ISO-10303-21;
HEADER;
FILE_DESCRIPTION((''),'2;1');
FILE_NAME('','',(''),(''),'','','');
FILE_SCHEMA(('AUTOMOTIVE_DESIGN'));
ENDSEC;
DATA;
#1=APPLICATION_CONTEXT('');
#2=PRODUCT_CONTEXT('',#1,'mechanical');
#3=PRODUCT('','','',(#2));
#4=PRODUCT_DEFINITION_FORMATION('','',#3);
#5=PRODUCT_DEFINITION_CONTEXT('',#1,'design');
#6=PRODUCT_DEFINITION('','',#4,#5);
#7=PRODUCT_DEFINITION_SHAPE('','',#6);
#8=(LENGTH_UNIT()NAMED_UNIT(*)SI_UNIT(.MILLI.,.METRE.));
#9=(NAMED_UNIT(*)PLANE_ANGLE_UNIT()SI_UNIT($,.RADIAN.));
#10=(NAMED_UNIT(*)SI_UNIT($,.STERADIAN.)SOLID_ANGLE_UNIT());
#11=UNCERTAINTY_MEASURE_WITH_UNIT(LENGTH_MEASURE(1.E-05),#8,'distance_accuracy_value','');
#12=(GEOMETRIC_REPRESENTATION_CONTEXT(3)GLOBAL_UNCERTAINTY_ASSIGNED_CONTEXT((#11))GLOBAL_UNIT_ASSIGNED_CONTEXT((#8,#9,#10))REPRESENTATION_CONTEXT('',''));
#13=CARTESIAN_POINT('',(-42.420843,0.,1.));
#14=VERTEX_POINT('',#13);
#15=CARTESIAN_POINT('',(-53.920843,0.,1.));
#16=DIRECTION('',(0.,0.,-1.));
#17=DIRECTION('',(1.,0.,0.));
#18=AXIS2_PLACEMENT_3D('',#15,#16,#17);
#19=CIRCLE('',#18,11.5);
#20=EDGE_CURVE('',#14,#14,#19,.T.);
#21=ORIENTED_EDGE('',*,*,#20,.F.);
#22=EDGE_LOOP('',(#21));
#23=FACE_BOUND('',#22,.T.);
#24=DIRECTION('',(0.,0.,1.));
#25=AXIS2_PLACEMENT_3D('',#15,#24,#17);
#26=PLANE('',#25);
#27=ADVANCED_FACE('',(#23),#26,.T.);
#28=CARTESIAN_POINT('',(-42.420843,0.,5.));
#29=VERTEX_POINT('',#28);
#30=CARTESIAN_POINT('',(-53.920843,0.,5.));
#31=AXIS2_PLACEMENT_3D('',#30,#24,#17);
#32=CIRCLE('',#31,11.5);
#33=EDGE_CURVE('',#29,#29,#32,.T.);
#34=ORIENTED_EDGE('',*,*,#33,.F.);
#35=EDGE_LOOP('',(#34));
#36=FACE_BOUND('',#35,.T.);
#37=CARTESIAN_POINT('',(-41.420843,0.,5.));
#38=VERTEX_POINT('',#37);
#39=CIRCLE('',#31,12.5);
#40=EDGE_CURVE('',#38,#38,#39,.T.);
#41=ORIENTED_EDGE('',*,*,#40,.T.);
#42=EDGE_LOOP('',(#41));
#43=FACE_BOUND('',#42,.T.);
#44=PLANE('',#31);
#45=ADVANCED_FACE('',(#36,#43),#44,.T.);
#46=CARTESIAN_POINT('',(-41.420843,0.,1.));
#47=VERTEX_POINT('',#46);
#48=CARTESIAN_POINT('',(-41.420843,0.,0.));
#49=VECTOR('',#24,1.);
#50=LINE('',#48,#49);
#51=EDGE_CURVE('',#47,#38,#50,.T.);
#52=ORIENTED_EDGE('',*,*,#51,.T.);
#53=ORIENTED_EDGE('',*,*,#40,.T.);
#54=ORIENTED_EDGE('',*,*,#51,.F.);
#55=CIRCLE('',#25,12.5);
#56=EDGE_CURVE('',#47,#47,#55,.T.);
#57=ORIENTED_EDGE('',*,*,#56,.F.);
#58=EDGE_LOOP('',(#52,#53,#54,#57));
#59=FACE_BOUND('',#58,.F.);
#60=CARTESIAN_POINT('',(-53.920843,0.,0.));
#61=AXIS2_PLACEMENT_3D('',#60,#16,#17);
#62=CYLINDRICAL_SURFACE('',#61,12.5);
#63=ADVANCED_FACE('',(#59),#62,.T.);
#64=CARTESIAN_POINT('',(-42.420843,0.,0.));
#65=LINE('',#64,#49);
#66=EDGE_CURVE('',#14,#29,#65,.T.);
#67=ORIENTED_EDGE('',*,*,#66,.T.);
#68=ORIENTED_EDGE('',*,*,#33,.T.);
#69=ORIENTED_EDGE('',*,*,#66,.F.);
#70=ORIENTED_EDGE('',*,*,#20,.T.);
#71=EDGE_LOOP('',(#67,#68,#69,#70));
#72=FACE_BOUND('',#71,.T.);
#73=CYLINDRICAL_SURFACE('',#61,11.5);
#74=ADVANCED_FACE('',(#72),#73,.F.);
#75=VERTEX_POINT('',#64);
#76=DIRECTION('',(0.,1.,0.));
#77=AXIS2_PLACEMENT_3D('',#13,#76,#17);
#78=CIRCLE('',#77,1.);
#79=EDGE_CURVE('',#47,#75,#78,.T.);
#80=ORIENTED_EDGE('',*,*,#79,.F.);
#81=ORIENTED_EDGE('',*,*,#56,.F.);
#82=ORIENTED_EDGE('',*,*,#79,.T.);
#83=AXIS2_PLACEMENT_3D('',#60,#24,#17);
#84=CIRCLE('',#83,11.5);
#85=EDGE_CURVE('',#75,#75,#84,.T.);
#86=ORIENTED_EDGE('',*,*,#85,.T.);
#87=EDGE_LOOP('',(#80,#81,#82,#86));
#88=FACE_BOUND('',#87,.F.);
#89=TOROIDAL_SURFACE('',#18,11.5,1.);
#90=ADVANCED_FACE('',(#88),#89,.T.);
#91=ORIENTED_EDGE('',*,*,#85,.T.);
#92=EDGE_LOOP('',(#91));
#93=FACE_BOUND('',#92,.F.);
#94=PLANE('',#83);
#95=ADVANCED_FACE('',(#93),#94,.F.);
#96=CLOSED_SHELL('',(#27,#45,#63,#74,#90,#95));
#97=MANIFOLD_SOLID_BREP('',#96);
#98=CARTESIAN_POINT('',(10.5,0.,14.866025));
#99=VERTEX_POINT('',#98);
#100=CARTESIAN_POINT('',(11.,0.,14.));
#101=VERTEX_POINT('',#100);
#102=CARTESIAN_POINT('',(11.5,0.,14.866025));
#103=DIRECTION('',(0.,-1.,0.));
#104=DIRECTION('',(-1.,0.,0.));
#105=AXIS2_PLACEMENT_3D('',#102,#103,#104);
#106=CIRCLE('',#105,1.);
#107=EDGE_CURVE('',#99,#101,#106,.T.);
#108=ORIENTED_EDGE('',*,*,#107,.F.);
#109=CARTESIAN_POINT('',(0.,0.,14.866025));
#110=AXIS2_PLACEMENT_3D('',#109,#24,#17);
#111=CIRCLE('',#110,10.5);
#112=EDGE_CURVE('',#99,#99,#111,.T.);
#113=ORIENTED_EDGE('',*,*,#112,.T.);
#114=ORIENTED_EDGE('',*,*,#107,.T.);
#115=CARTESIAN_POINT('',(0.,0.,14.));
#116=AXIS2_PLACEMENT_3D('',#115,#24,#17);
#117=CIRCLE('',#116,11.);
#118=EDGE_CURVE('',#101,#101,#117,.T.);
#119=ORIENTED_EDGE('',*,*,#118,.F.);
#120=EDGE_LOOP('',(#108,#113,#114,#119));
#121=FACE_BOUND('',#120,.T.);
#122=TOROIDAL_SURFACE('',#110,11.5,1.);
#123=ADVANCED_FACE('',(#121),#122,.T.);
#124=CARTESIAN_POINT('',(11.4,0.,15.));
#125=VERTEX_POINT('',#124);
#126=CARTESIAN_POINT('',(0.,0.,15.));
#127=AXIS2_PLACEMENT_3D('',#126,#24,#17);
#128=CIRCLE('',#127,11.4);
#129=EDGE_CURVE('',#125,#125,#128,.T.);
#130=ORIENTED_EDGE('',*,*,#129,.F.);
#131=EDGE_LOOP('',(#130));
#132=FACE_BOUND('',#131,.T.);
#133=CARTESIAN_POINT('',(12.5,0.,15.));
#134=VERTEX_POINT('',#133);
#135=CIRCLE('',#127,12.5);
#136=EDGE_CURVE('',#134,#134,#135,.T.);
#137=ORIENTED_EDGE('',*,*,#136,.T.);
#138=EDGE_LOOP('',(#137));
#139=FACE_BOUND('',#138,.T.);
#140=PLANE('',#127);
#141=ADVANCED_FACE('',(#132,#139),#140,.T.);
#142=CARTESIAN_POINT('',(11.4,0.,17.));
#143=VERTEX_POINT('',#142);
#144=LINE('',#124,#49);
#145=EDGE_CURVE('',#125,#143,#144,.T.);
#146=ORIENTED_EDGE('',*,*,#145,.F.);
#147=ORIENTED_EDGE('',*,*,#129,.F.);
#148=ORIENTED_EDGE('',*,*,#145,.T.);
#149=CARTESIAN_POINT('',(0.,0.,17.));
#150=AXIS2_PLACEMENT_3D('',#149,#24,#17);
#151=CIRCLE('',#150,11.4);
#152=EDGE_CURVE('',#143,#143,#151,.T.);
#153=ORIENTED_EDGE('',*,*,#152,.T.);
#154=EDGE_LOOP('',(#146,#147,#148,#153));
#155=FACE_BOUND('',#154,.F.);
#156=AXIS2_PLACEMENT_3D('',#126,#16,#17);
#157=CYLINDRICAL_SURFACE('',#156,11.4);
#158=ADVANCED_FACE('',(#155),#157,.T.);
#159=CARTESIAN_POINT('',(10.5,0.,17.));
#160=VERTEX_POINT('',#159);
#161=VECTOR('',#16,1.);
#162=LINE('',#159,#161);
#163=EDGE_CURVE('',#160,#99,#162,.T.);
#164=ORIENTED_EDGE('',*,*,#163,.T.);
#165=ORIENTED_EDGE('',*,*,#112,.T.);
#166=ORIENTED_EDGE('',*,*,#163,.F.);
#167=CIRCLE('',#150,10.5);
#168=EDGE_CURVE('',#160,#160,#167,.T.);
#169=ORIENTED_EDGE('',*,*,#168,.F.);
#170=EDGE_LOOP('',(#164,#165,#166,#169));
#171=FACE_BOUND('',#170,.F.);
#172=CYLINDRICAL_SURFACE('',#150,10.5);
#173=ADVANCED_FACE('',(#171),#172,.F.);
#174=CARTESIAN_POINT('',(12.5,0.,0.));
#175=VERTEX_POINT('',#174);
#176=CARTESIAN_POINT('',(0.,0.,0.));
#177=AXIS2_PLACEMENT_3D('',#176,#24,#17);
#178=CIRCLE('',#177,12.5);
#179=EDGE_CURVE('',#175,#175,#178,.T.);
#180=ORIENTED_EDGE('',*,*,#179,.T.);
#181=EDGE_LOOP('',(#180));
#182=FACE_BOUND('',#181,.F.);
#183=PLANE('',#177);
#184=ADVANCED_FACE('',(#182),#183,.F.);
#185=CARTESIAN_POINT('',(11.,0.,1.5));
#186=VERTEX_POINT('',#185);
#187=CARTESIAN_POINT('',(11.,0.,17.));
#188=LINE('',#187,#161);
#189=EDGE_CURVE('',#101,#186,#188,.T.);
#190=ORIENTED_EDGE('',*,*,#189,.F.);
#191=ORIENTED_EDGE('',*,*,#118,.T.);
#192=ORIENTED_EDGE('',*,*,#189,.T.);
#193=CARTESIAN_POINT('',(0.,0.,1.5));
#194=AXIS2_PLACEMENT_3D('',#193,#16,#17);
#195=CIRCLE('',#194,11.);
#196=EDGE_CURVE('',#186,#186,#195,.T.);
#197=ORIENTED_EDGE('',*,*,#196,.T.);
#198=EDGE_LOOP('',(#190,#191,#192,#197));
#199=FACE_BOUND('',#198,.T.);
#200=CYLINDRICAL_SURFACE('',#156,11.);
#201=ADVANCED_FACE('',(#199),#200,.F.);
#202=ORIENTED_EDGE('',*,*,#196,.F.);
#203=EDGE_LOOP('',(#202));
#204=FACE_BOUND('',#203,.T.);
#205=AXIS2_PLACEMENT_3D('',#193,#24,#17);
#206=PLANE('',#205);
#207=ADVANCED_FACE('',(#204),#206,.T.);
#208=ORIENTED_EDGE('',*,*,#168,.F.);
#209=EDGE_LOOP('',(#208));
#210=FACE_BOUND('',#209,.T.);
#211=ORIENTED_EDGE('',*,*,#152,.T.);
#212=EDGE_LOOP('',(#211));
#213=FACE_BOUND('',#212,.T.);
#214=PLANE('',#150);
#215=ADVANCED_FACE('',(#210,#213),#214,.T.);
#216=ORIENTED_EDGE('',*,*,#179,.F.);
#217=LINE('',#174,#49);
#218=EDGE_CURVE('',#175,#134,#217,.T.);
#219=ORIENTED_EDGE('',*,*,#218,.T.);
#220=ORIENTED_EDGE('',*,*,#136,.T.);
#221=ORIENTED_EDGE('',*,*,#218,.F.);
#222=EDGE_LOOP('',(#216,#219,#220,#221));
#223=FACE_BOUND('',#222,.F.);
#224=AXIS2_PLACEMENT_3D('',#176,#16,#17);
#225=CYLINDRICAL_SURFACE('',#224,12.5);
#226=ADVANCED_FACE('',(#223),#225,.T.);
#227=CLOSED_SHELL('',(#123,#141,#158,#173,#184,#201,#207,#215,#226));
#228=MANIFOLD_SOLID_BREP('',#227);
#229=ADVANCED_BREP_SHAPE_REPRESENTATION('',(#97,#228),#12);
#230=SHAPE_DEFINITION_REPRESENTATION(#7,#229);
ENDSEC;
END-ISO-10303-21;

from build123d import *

# Parameters (mm, degrees)
F0_R      = 12.5
F1_DEPTH  = 15
F2_T      = -1.5
F3_R      = 11.4
F3_R_2    = 11
F4_DEPTH  = 2
F5_R      = 12.5
F6_DEPTH  = 5
F7_T      = -1
F8_R      = 1
F10_R     = 11
F10_R_2   = 10.5
F11_DEPTH = 3


# Not quite as in the source:
# - a fillet or chamfer that OpenCascade refuses, or shapes differently, is made with other operations: its cross-section is extruded or revolved along the edge and cut away or added


with BuildPart() as f1:
    # F0 (on Top) → F1 (new body)
    with BuildSketch(Plane.XY):
        Circle(F0_R)
    extrude(amount=F1_DEPTH)

    # F2
    f2_openings = [f1.faces().sort_by_distance(p)[0] for p in [
        (0, 0, 15),
    ]]
    offset(amount=F2_T, openings=f2_openings)

    # F3 (on face) → F4 (join)
    with BuildSketch(Plane.XY.offset(15)):
        Circle(F3_R)
        Circle(F3_R_2, mode=Mode.SUBTRACT)
    extrude(amount=F4_DEPTH)

    # F10 (on face) → F11 (join)
    with BuildSketch(Plane.XY.offset(17)):
        Circle(F10_R)
        Circle(F10_R_2, mode=Mode.SUBTRACT)
    extrude(amount=-F11_DEPTH)

    # F12: fillet of radius 1 on 1 edges, made by hand

    # F12_s1 → F12_t2 (revolve, cut)
    with BuildSketch(Plane.XZ):
        with BuildLine():
            ThreePointArc((10.5, 14.8660254038), (10.6339745962, 14.3660254038), (11, 14))
            Line((11, 14), (10.5, 14))
            Line((10.5, 14), (10.5, 14.8660254038))
        make_face()
    revolve(axis=Axis((0, 0, 14), (0, 0, 1)), mode=Mode.SUBTRACT)


with BuildPart() as f6:
    # F5 (on Top) → F6 (new body)
    with BuildSketch(Plane.XY):
        with Locations((-53.9208427072, 0)):
            Circle(F5_R)
    extrude(amount=F6_DEPTH)

    # F7
    f7_openings = [f6.faces().sort_by_distance(p)[0] for p in [
        (-53.920843, 0, 5),
    ]]
    offset(amount=F7_T, openings=f7_openings)

    # F8
    f8_edges = [f6.edges().sort_by_distance(p)[0] for p in [
        (-66.420843, 0, 0),
    ]]
    fillet(f8_edges, radius=F8_R)


solid = Compound([f1.part, f6.part])
